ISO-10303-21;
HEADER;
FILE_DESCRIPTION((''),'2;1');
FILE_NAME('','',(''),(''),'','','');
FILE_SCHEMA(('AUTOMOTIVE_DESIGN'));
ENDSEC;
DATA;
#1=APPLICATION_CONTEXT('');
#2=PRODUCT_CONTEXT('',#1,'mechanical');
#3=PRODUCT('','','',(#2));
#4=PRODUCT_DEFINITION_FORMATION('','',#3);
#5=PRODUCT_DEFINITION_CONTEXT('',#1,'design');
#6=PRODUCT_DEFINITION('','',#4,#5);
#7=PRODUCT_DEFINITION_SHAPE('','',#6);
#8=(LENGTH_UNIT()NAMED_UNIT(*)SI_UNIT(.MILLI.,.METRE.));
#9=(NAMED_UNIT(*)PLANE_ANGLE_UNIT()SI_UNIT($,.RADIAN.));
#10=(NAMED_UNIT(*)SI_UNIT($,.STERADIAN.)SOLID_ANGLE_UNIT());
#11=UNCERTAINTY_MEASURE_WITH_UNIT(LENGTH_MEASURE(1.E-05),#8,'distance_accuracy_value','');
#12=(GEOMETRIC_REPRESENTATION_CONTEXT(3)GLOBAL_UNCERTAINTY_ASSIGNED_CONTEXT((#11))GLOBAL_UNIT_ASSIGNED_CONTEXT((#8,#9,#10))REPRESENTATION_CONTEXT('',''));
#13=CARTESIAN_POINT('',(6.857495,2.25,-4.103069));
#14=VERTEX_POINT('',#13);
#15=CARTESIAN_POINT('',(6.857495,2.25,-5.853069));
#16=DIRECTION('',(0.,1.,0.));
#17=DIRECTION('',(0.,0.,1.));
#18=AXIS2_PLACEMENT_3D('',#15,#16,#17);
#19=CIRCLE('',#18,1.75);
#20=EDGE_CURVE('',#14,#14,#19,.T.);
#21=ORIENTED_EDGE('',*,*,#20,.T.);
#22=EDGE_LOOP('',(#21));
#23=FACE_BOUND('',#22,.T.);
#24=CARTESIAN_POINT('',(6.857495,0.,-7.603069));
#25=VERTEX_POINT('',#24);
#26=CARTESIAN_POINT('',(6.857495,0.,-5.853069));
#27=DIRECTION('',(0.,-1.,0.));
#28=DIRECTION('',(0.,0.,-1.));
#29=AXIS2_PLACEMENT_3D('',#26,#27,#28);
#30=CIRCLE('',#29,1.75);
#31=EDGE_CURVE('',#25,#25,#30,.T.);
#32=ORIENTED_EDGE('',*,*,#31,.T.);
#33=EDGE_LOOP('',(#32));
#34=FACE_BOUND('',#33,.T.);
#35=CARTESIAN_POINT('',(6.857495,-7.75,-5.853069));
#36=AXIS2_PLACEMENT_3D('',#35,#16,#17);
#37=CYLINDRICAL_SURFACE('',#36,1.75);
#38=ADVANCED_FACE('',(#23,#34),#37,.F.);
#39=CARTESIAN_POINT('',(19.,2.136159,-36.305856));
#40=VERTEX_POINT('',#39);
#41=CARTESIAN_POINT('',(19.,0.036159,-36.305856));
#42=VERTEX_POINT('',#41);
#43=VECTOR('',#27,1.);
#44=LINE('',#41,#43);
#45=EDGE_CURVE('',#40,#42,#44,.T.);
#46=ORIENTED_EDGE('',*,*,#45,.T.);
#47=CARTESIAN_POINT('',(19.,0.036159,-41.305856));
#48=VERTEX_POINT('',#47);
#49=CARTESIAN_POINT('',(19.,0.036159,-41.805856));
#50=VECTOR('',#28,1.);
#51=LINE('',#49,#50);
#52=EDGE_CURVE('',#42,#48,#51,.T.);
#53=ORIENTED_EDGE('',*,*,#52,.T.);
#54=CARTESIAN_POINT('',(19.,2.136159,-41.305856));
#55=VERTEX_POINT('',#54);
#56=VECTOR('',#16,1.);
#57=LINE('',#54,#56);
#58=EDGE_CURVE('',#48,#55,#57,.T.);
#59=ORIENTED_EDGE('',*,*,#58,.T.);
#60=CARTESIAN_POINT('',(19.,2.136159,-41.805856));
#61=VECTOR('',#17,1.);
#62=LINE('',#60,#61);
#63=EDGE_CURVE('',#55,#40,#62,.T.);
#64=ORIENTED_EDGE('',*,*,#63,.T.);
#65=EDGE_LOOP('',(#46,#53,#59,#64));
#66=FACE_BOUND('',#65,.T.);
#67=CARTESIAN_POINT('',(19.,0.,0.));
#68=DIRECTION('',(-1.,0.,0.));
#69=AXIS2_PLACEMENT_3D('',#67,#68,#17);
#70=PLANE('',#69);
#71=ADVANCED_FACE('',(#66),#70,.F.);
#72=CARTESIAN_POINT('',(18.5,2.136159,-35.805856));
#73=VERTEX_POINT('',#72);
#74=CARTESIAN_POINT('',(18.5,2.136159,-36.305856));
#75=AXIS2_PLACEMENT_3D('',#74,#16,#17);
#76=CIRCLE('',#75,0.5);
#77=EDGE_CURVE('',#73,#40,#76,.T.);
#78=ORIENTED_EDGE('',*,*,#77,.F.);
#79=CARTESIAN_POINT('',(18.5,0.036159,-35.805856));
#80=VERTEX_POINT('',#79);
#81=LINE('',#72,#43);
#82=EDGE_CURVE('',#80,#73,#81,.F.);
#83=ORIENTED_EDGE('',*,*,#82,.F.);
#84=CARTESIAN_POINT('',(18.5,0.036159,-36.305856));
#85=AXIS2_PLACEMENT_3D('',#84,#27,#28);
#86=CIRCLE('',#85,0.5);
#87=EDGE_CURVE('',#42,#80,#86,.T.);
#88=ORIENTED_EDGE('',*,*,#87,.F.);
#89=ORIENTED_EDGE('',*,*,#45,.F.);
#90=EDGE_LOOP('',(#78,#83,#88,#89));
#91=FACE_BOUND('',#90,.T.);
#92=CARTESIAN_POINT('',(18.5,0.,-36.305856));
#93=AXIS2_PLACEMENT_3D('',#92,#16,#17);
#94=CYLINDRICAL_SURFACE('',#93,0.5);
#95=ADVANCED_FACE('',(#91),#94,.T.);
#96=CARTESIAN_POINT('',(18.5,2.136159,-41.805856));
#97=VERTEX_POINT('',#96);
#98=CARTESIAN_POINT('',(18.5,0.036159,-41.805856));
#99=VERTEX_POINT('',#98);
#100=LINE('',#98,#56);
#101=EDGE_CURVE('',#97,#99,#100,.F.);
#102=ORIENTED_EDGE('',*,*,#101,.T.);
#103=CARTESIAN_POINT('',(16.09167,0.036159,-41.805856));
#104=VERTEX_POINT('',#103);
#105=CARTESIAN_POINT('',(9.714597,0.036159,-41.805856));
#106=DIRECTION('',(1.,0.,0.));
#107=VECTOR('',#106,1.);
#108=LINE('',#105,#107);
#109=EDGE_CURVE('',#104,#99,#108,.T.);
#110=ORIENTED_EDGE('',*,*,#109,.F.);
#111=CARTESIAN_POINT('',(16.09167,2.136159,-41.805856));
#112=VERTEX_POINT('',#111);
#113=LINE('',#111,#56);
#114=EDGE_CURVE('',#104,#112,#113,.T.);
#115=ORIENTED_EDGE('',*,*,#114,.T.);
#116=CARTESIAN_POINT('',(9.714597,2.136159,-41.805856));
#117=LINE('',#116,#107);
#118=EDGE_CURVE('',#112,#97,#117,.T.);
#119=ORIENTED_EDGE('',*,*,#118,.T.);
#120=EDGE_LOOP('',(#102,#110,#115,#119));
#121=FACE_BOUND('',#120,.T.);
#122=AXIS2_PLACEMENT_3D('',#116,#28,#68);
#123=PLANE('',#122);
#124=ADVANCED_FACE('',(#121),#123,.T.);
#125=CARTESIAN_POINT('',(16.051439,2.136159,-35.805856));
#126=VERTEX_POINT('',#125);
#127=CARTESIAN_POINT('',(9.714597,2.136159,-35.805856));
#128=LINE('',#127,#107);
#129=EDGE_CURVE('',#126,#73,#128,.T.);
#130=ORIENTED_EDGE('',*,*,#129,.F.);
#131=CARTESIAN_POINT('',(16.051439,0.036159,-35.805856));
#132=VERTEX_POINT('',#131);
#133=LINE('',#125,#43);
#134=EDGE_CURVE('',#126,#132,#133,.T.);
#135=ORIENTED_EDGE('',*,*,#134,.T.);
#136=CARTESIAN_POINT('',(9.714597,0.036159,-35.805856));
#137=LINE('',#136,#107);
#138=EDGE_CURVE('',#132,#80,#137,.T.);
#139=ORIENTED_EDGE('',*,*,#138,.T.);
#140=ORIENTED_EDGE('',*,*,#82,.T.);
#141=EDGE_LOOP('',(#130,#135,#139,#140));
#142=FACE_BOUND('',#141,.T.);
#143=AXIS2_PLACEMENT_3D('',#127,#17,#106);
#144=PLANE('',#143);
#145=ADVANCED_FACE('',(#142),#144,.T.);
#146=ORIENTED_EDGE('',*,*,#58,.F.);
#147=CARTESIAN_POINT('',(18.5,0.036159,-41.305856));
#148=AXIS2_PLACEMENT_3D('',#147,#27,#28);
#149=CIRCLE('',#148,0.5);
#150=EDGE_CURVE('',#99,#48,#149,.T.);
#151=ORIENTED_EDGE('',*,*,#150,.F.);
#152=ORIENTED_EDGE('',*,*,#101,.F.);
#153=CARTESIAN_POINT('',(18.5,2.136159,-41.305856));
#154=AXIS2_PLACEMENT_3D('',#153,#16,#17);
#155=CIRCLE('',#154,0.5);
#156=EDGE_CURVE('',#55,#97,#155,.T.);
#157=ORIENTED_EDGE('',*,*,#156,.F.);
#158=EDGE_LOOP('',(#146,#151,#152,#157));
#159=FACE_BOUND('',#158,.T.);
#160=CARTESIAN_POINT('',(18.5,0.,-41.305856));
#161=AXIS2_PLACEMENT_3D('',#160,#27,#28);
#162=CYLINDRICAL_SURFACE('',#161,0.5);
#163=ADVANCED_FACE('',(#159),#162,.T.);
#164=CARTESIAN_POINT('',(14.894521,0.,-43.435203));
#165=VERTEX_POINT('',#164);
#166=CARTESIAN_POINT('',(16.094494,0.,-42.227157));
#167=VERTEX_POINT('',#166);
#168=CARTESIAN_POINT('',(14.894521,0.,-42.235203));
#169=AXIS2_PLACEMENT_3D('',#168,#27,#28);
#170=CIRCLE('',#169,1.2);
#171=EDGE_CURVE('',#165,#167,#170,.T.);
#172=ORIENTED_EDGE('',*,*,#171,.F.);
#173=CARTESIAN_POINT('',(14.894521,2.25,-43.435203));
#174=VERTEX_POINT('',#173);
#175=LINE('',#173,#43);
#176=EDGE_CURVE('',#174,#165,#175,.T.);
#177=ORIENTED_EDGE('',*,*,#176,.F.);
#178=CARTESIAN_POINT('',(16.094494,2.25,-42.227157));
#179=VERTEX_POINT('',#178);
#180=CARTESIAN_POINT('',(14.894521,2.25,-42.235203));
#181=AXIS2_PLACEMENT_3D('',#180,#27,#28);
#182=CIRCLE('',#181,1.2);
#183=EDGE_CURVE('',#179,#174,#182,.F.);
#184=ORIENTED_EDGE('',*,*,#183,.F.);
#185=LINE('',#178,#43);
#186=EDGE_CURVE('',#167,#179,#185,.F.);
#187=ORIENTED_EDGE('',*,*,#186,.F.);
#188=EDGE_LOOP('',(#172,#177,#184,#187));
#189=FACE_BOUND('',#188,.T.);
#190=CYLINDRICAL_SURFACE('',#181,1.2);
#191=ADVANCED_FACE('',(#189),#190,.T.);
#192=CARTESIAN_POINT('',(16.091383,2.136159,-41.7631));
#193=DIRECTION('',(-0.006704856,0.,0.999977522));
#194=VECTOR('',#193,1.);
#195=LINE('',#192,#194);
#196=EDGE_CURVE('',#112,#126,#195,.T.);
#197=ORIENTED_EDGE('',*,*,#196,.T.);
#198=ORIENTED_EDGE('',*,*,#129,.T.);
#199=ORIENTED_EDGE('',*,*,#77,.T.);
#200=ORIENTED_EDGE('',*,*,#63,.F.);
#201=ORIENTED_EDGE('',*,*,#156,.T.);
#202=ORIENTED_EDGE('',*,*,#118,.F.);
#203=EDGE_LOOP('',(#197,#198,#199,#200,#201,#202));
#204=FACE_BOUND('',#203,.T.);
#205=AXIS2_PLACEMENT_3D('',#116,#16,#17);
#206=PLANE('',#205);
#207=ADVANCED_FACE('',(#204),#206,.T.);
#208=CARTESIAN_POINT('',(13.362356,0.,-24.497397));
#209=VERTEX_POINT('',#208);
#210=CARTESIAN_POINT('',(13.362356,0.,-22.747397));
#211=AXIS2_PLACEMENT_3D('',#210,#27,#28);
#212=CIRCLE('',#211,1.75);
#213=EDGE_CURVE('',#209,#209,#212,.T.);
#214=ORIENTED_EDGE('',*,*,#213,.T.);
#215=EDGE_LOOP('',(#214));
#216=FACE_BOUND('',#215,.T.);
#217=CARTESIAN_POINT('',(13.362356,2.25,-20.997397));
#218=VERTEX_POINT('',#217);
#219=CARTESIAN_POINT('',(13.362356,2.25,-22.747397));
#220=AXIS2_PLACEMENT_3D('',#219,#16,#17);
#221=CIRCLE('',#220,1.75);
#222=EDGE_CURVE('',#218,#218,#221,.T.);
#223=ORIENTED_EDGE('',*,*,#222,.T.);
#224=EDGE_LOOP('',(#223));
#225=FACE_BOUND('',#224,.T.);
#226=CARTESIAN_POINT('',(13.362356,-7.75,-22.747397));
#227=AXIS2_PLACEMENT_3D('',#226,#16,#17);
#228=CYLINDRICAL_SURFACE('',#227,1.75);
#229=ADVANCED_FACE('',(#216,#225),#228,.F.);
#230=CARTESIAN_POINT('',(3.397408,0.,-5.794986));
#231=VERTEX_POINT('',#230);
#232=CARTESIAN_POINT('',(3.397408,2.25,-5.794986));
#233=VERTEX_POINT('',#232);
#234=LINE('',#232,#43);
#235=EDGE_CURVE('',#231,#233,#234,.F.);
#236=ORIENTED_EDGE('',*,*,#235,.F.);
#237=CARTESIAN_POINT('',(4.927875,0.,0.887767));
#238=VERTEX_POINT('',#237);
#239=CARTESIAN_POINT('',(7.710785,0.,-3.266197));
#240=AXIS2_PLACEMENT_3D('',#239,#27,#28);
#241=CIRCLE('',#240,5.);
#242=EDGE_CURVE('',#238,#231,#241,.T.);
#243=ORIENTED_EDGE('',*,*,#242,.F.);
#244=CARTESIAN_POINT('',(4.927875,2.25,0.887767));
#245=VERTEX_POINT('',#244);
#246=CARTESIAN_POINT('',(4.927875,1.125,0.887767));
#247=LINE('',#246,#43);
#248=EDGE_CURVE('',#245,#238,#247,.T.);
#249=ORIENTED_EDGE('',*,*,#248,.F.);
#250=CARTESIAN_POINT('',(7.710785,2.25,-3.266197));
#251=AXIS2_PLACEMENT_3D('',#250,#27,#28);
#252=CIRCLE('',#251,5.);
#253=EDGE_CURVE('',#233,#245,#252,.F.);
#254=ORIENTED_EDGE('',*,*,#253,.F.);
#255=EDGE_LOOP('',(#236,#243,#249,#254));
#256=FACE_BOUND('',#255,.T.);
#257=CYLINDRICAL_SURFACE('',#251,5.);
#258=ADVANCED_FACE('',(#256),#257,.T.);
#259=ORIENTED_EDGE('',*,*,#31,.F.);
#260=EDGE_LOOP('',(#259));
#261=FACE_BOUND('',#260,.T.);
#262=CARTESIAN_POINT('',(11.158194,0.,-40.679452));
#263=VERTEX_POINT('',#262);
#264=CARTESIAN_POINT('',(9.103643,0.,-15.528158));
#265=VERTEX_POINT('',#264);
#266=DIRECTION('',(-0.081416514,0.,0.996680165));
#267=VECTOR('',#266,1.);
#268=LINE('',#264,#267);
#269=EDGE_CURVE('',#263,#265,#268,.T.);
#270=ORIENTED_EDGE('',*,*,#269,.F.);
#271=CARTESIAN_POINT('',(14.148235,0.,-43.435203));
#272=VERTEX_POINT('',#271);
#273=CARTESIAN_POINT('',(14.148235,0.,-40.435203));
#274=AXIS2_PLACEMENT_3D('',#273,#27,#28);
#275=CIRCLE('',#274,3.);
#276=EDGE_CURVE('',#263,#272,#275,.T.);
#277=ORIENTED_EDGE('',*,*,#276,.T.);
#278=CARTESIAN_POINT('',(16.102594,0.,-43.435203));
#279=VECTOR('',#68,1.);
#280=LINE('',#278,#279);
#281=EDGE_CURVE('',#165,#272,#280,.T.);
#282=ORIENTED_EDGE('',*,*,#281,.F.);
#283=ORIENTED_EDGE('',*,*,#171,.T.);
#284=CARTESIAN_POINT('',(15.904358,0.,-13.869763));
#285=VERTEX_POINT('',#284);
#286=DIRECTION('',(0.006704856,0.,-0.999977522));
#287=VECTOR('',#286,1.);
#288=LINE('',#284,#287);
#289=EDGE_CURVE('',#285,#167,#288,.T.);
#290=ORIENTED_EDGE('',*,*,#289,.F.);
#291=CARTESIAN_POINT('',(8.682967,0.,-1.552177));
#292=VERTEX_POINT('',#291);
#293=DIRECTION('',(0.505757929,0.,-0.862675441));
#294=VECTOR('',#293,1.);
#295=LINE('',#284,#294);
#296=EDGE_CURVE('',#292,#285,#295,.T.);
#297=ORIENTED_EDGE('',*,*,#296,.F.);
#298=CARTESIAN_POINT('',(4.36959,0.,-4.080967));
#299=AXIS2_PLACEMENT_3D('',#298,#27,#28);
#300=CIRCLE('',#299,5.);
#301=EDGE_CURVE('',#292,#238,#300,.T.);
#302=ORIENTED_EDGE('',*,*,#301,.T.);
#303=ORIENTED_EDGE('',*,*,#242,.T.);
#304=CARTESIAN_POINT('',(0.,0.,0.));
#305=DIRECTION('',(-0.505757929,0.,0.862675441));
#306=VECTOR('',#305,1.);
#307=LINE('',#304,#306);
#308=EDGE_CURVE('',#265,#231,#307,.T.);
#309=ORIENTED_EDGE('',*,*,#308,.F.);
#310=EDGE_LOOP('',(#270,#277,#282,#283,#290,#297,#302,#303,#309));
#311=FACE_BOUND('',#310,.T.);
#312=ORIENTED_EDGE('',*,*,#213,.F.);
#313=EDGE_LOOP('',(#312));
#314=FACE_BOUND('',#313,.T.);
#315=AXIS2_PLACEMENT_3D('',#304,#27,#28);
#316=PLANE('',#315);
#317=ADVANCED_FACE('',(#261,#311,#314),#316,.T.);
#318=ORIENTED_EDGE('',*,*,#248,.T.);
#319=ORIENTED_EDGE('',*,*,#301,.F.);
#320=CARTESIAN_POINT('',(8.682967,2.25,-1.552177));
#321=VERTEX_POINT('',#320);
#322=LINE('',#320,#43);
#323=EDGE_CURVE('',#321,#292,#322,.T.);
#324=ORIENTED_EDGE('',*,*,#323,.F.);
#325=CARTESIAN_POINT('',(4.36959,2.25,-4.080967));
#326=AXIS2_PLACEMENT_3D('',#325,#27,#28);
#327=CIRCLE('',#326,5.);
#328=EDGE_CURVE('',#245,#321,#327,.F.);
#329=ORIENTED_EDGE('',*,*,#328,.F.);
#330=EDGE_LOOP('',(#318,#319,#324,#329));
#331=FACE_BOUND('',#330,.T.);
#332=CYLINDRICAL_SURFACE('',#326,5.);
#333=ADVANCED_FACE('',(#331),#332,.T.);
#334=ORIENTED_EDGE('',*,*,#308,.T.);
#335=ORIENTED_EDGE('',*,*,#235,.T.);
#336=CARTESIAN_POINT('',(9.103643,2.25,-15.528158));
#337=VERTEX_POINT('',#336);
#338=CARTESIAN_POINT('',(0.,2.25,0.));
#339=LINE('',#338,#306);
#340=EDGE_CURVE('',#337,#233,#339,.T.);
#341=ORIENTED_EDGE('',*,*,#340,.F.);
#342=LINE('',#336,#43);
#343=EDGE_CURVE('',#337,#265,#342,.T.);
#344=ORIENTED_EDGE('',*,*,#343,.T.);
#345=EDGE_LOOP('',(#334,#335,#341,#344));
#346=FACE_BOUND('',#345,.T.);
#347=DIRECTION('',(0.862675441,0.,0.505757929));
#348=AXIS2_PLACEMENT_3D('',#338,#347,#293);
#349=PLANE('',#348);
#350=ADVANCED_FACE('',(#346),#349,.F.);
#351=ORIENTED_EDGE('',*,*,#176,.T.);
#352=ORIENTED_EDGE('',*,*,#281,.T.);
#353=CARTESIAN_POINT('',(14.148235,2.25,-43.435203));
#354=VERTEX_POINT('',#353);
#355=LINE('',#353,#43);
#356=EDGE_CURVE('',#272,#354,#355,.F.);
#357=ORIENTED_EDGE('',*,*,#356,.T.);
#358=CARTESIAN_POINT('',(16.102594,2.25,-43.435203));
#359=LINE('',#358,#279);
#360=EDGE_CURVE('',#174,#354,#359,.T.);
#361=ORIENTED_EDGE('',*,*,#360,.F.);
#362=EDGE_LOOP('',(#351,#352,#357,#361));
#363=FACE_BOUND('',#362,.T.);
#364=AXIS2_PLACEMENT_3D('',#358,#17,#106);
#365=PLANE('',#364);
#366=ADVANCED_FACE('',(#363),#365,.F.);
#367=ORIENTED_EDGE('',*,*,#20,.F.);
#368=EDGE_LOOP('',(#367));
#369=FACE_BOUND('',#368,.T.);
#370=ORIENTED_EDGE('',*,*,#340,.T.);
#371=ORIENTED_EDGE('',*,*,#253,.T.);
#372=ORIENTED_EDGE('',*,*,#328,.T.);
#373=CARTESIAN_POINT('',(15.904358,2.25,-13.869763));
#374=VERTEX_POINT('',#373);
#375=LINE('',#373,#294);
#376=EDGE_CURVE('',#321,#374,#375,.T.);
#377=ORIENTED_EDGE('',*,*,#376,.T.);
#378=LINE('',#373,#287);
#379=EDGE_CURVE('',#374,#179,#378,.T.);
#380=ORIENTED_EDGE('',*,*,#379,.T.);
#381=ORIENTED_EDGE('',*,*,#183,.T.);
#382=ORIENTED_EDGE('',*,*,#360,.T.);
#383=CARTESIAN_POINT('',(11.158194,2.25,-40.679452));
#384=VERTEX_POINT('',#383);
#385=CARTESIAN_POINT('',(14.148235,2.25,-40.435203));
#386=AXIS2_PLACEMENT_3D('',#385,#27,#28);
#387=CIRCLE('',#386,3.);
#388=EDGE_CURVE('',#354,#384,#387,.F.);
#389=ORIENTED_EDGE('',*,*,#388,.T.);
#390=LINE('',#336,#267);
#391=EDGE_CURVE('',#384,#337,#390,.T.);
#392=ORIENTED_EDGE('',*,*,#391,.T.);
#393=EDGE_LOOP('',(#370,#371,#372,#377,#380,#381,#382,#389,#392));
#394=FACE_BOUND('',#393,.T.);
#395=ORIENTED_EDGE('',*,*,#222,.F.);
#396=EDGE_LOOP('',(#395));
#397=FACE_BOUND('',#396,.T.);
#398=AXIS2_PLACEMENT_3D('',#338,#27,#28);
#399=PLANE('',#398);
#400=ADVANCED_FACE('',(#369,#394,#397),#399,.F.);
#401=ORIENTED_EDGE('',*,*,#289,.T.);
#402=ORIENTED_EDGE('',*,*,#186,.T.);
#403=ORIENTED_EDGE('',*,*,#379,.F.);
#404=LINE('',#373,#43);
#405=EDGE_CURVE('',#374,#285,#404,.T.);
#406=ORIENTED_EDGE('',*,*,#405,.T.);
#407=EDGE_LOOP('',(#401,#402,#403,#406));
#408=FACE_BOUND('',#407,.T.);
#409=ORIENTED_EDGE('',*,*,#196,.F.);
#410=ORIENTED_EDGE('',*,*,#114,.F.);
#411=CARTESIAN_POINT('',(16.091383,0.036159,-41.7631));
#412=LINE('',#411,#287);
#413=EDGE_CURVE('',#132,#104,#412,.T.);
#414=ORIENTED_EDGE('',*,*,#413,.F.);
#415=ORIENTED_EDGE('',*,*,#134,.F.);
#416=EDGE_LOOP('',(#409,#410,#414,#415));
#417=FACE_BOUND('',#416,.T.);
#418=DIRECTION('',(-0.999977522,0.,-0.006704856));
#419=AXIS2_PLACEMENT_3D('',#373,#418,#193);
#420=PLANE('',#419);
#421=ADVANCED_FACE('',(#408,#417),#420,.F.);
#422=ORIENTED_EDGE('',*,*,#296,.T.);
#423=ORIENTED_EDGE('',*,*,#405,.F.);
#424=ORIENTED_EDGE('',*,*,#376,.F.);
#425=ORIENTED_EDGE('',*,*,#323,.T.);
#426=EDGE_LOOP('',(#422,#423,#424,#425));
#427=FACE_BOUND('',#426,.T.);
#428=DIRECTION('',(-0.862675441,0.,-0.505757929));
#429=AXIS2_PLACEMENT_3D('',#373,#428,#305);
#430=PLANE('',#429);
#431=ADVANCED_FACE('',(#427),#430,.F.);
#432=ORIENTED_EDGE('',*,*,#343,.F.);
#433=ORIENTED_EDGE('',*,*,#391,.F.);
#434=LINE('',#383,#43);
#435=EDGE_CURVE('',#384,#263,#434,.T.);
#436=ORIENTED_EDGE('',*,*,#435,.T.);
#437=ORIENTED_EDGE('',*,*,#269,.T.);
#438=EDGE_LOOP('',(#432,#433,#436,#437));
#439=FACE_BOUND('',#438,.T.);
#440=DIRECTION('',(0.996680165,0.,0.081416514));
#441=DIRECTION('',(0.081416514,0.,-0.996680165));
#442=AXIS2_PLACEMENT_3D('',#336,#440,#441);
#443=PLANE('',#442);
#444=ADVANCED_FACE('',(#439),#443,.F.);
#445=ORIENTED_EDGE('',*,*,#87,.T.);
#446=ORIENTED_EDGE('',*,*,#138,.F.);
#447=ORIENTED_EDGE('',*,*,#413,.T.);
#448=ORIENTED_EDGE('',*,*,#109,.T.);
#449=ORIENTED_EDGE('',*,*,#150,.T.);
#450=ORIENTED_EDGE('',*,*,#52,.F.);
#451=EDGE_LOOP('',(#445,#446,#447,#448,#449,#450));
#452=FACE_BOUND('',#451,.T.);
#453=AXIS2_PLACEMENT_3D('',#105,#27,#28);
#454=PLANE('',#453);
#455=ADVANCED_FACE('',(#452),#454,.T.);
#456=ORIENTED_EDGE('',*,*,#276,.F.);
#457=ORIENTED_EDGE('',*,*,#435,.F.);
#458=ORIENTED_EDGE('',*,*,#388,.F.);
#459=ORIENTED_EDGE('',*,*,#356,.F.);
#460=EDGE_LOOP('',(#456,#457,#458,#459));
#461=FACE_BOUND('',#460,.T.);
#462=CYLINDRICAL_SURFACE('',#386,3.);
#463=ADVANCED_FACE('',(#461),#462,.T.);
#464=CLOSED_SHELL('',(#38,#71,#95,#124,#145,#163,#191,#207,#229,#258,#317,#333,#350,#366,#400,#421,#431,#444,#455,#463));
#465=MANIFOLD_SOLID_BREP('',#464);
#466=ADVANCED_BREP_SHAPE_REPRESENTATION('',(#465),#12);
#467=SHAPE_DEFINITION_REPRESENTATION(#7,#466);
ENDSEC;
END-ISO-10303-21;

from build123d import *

# Parameters (mm, degrees)
BOSS_EXTRUDE1_DEPTH = 2.25
FILLET1_R           = 5
BOSS_EXTRUDE2_REACH = 40.996
SKETCH4_W           = 6
SKETCH4_H           = 2.1
SKETCH4_2_W         = 6
SKETCH4_2_H         = 2.1
BOSS_EXTRUDE3_DEPTH = 2.908330475
FILLET2_R           = 3
FILLET3_R           = 1.2
FILLET4_R           = 0.5
SKETCH2_R           = 1.75
CUT_EXTRUDE1_DEPTH  = 10


with BuildPart() as part:
    # Sketch1 → Boss-Extrude1 (new body)
    with BuildSketch(Plane(origin=(0, 0, 0), x_dir=(1, 0, 0), z_dir=(0, 1, 0))):
        Polygon((0, 0), (9.103642727, 15.528157943), (11.383305122, 43.435202562), (16.102594303, 43.435202562), (15.904357834, 13.869762926), (6.800715107, -1.658395017), align=None)
    extrude(amount=BOSS_EXTRUDE1_DEPTH)

    # Fillet1
    # the kernel refuses this fillet: 5 mm, written as the material it takes off along each edge
    with BuildSketch(Plane(origin=(6.800715107, -9.304114403, 1.658395017), x_dir=(0.5057579292685198, 0, -0.8626754412767405), z_dir=(0, 1, 0))) as fillet1_piece_1:
        with BuildLine():
            CenterArc((FILLET1_R * 0.744329152265, FILLET1_R), FILLET1_R, 196.677230039, 73.322769961)
            Line((-FILLET1_R * 0.213607467111, FILLET1_R * 0.713020151823), (0, 0))
            Line((0, 0), (FILLET1_R * 0.744329152265, 0))
        make_face()
    extrude(amount=20.858228807, mode=Mode.SUBTRACT)
    with BuildSketch(Plane(origin=(0, -16.79364561, 0), x_dir=(0.5057579292685198, 0, -0.8626754412767405), z_dir=(0, 1, 0))) as fillet1_piece_2:
        with BuildLine():
            CenterArc((FILLET1_R * 1.34349164877, -FILLET1_R), FILLET1_R, 90, 106.677230039)
            Line((FILLET1_R * 0.38555502939, -FILLET1_R * 1.28697984818), (0, 0))
            Line((0, 0), (FILLET1_R * 1.34349164877, 0))
        make_face()
    extrude(amount=35.837291219, mode=Mode.SUBTRACT)

    # Boss-Extrude2: up to this plane
    boss_extrude2_end = Plane(origin=(15.904357834, 2.25, -13.869762926), z_dir=(-0.9999775222008104, 0, -0.006704855936389689))
    # Sketch4 → Boss-Extrude2 (add, up to the surface)
    with BuildSketch(Plane(origin=(19, -1.484709168, -8.201879583), x_dir=(0, 0, -1), z_dir=(1, 0, 0)), mode=Mode.PRIVATE) as boss_extrude2_sk1:
        with Locations((30.603976534, 2.57086864)):
            Rectangle(SKETCH4_W, SKETCH4_H)
    boss_extrude2_tool1 = split(extrude(boss_extrude2_sk1.sketch, amount=-BOSS_EXTRUDE2_REACH, mode=Mode.PRIVATE), bisect_by=boss_extrude2_end, keep=Keep.BOTH, mode=Mode.PRIVATE)
    add(boss_extrude2_tool1.solids().sort_by_distance((19, 1.086159, -38.805856))[0])

    # Sketch4<2> → Boss-Extrude3 (add)
    with BuildSketch(Plane(origin=(19, -1.484709168, -8.201879583), x_dir=(0, 0, -1), z_dir=(1, 0, 0))):
        with Locations((30.603976534, 2.57086864)):
            Rectangle(SKETCH4_2_W, SKETCH4_2_H)
    extrude(amount=-BOSS_EXTRUDE3_DEPTH)

    # Fillet2
    fillet2_edges = [part.edges().sort_by_distance(p)[0] for p in [
        (11.383305122, 1.125, -43.435202562),
    ]]
    fillet(fillet2_edges, radius=FILLET2_R)

    # Fillet3
    fillet3_edges = [part.edges().sort_by_distance(p)[0] for p in [
        (16.102594303, 1.125, -43.435202562),
    ]]
    fillet(fillet3_edges, radius=FILLET3_R)

    # Fillet4
    fillet4_edges = [part.edges().sort_by_distance(p)[0] for p in [
        (19, 1.086159472, -41.805856117),
        (19, 1.086159472, -35.805856117),
    ]]
    fillet(fillet4_edges, radius=FILLET4_R)

    # Sketch2 → Cut-Extrude1 (cut)
    with BuildSketch(Plane(origin=(0, 2.25, 0), x_dir=(1, 0, 0), z_dir=(0, 1, 0))):
        with Locations(Location((6.857494693, 5.853068737, 0), (0, 0, 270))):
            Circle(SKETCH2_R)
        with Locations(Location((13.362356268, 22.747397122, 0), (0, 0, 270))):
            Circle(SKETCH2_R)
    extrude(amount=-CUT_EXTRUDE1_DEPTH, mode=Mode.SUBTRACT)


solid = part.part
